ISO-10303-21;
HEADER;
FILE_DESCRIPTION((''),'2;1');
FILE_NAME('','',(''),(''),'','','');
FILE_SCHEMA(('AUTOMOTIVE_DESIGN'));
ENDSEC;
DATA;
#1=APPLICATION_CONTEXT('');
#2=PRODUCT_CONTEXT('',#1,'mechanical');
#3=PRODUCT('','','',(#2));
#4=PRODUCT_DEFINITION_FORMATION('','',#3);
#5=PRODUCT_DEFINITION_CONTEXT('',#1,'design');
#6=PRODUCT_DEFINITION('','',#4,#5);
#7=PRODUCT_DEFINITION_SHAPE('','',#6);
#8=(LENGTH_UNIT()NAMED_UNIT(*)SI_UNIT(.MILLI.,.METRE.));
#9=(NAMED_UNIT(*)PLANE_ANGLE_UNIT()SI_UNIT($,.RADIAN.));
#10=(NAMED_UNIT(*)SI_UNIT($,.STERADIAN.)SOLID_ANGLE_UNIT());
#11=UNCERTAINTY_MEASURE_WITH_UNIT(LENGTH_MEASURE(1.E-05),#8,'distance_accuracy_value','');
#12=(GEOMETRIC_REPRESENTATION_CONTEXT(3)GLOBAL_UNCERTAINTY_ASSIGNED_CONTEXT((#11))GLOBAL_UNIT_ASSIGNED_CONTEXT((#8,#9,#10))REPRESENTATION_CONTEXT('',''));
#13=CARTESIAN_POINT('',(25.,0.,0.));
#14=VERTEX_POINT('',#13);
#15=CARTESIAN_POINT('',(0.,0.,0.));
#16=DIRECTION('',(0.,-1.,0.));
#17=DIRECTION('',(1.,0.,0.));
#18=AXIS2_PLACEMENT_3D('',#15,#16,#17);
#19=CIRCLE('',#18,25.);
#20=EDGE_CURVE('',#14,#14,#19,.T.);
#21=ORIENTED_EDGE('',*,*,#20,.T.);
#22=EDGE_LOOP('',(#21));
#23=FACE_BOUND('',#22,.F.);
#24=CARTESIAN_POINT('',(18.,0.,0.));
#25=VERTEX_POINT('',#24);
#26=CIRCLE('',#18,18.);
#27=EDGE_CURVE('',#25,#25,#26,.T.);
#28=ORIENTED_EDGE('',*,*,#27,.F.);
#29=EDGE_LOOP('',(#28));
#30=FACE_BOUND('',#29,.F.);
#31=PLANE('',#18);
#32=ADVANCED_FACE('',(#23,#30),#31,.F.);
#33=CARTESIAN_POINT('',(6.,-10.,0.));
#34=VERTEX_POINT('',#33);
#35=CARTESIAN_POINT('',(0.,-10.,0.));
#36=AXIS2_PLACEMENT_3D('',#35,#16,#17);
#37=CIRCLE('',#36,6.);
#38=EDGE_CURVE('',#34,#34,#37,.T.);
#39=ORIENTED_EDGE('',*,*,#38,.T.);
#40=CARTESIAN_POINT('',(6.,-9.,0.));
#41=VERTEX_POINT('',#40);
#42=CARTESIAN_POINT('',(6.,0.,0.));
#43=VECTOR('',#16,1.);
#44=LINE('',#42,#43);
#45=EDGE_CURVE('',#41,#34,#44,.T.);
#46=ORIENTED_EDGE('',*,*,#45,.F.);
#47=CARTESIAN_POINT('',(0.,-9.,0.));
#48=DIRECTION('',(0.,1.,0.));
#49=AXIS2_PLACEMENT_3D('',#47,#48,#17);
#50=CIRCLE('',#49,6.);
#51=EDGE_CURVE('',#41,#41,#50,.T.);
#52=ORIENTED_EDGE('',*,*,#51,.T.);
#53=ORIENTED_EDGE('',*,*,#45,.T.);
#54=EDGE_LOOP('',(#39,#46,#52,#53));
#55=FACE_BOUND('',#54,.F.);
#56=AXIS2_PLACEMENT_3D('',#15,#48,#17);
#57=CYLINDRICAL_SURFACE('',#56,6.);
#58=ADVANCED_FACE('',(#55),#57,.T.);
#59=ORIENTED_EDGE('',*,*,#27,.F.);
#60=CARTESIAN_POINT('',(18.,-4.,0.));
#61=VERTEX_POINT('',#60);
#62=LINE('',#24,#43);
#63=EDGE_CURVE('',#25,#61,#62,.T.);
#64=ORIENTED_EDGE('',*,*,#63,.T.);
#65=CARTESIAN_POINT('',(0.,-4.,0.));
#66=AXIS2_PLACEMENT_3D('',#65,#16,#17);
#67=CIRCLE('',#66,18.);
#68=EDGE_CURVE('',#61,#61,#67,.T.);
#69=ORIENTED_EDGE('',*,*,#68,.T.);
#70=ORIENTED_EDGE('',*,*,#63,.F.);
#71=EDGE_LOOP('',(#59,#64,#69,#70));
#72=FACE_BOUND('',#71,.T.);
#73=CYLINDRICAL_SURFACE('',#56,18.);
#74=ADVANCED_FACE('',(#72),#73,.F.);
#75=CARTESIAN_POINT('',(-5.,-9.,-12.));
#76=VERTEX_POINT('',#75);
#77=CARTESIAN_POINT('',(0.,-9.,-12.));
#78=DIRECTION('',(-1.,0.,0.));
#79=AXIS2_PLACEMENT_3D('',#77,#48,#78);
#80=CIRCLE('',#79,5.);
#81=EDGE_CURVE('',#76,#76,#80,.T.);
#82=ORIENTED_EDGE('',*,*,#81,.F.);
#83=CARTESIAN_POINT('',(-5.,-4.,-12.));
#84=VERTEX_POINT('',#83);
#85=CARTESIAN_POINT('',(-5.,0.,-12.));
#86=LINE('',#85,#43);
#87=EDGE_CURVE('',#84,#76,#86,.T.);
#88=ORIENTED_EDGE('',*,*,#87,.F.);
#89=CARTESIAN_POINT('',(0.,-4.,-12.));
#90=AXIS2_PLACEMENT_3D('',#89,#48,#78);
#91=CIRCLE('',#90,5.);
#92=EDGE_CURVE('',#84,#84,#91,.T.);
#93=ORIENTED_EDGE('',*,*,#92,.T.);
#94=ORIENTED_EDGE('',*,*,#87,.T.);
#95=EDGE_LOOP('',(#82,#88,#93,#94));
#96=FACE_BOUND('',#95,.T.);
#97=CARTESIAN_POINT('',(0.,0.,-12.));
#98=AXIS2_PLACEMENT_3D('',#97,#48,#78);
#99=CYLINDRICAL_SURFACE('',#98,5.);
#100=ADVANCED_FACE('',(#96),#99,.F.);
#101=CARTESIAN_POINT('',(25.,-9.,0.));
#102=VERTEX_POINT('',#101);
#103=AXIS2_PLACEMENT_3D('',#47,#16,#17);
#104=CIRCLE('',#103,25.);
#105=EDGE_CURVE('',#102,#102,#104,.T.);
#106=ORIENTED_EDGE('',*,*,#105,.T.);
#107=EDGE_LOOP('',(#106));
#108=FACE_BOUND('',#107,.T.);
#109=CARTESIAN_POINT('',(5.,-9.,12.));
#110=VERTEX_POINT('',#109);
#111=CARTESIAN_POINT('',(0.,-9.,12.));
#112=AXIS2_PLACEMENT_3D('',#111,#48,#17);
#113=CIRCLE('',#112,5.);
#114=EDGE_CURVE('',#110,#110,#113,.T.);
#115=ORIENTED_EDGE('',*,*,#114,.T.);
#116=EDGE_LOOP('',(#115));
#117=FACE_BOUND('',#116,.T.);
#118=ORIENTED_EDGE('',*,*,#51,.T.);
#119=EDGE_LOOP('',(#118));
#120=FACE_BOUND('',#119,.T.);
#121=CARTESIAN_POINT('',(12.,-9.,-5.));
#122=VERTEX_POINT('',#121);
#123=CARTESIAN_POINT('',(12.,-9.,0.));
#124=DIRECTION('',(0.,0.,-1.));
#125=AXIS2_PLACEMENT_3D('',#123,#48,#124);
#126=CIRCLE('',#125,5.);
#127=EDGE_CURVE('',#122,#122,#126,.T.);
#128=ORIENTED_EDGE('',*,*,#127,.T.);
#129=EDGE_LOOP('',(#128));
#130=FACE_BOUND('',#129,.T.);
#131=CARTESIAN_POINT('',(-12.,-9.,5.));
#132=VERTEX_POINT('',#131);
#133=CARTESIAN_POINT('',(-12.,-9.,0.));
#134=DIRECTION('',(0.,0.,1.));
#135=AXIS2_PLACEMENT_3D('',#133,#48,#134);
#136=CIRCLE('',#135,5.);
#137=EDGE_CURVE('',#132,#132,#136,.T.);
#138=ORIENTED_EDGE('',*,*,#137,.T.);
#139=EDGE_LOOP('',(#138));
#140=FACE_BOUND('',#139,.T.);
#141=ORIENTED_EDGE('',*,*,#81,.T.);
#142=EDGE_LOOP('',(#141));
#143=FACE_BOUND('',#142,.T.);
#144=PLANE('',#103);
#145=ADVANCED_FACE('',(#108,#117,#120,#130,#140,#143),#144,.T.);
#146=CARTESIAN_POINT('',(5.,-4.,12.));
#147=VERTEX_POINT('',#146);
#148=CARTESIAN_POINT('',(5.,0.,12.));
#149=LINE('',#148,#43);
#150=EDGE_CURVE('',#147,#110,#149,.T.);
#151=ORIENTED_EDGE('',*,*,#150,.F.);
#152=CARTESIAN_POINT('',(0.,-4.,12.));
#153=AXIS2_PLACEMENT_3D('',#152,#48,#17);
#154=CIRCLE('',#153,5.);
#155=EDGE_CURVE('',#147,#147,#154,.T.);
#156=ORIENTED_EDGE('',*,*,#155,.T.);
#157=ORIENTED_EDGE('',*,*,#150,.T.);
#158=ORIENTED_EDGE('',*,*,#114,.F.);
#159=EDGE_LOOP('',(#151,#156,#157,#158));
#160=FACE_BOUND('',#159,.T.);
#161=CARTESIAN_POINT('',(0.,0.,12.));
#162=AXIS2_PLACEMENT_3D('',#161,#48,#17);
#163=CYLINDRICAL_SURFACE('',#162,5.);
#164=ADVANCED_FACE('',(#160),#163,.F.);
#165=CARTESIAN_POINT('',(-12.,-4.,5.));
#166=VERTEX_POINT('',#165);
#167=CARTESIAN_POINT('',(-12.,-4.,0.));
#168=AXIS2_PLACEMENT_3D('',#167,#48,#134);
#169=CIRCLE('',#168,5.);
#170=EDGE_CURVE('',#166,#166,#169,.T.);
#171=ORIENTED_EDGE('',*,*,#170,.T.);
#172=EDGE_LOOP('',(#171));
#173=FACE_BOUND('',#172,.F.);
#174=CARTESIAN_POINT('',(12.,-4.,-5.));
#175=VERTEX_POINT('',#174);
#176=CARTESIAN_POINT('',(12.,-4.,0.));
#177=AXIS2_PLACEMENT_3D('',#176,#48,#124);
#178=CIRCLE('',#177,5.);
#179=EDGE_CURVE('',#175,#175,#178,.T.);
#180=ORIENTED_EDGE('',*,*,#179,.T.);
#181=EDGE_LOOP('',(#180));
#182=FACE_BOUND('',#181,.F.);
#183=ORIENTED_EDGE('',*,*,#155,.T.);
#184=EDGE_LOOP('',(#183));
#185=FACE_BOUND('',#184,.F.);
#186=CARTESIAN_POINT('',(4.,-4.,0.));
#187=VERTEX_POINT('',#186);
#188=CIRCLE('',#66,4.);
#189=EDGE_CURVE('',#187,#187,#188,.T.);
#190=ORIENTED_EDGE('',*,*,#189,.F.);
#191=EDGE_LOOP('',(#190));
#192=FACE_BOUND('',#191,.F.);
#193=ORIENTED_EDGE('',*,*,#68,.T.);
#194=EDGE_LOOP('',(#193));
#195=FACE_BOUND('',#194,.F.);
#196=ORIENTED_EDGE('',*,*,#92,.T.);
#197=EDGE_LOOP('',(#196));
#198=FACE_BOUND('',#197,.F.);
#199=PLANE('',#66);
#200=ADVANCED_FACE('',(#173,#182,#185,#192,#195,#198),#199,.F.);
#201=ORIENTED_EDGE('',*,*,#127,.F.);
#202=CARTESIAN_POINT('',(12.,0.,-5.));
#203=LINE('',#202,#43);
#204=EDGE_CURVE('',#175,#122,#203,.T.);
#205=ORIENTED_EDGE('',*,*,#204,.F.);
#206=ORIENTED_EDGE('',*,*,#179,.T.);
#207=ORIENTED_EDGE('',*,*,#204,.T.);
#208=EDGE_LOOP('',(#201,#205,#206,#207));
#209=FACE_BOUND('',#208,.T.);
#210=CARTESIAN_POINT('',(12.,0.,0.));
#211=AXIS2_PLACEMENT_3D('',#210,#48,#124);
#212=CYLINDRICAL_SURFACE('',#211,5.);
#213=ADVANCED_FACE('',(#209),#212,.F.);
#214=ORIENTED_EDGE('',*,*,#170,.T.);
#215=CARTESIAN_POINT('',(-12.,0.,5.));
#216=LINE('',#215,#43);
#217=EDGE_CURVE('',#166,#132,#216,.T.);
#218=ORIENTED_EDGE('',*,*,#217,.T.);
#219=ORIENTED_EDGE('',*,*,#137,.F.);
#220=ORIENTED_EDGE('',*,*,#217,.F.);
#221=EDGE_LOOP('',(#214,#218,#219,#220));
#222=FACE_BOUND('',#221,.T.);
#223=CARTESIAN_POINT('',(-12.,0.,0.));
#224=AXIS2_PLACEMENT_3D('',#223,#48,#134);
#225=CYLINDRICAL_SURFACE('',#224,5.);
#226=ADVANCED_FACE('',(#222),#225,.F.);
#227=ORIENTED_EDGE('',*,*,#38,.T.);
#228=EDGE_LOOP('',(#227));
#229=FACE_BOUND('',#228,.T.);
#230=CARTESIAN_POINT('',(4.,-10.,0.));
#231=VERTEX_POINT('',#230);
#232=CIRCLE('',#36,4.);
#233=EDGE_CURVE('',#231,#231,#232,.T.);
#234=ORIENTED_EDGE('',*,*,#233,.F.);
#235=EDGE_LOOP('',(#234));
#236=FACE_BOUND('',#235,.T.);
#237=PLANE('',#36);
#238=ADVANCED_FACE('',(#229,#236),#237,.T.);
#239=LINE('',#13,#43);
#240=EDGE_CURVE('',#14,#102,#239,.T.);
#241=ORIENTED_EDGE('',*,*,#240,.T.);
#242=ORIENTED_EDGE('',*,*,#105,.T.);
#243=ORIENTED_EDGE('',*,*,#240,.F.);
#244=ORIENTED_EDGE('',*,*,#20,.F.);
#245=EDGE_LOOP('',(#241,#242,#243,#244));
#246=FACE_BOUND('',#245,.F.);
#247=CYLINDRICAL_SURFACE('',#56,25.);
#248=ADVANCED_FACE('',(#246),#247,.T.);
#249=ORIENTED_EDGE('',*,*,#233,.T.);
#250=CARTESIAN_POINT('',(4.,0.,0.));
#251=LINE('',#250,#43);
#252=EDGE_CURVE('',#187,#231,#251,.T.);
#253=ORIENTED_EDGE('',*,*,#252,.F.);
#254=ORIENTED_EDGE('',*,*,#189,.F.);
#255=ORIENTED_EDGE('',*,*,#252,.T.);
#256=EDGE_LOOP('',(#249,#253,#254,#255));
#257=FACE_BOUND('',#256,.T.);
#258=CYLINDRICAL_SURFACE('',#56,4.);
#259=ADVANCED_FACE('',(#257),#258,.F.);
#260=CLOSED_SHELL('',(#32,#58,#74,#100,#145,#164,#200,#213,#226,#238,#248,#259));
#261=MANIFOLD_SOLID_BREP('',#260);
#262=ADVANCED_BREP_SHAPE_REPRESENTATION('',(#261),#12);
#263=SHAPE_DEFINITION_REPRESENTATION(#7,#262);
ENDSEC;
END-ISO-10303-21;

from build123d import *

# Parameters (mm, degrees)
F0_R            = 25
F0_R_2          = 18
F0_R_3          = 6
F0_R_4          = 5
F0_R_5          = 4
F1_DEPTH        = 9
F2_DEPTH        = 10
F3_DEPTH        = 4
F4_DEPTH        = 10.001
F4_COPIES_COUNT = 4


# Not quite as in the source:
# - a pattern or mirror of a feature is missing from the dataset's text; its kind, count and spacing are read off the source's solid


with BuildPart() as f1:
    # F0 (on Front) → F1 (new body)
    with BuildSketch(Plane.XZ):
        Circle(F0_R)
        Circle(F0_R_2, mode=Mode.SUBTRACT)
        Circle(F0_R_2)
        Circle(F0_R_3, mode=Mode.SUBTRACT)
        with Locations((0, 12)):
            Circle(F0_R_4, mode=Mode.SUBTRACT)
        Circle(F0_R_3)
        Circle(F0_R_5, mode=Mode.SUBTRACT)
        with Locations((0, 12)):
            Circle(F0_R_4)
    extrude(amount=F1_DEPTH)

    # F0 (on Front) → F2 (join)
    with BuildSketch(Plane.XZ):
        Circle(F0_R_3)
        Circle(F0_R_5, mode=Mode.SUBTRACT)
    extrude(amount=F2_DEPTH)

    # F0 (on Front) → F3 (cut)
    with BuildSketch(Plane.XZ):
        Circle(F0_R_2)
        Circle(F0_R_3, mode=Mode.SUBTRACT)
        with Locations((0, 12)):
            Circle(F0_R_4, mode=Mode.SUBTRACT)
        Circle(F0_R_3)
        Circle(F0_R_5, mode=Mode.SUBTRACT)
        with Locations((0, 12)):
            Circle(F0_R_4)
    extrude(amount=F3_DEPTH, mode=Mode.SUBTRACT)

    # F0 (on Front) → F4 (cut, through all)
    with BuildSketch(Plane.XZ):
        with Locations((0, 12)):
            Circle(F0_R_4)
    f4 = extrude(amount=F4_DEPTH, mode=Mode.SUBTRACT)

    # F4_copies: F4 ×4 about axis
    f4_copies_axis = Axis((0, 0, 0), (0, 1, 0))
    for i in range(1, F4_COPIES_COUNT):
        add(f4.rotate(f4_copies_axis, i * 360 / F4_COPIES_COUNT), mode=Mode.SUBTRACT)


solid = f1.part
